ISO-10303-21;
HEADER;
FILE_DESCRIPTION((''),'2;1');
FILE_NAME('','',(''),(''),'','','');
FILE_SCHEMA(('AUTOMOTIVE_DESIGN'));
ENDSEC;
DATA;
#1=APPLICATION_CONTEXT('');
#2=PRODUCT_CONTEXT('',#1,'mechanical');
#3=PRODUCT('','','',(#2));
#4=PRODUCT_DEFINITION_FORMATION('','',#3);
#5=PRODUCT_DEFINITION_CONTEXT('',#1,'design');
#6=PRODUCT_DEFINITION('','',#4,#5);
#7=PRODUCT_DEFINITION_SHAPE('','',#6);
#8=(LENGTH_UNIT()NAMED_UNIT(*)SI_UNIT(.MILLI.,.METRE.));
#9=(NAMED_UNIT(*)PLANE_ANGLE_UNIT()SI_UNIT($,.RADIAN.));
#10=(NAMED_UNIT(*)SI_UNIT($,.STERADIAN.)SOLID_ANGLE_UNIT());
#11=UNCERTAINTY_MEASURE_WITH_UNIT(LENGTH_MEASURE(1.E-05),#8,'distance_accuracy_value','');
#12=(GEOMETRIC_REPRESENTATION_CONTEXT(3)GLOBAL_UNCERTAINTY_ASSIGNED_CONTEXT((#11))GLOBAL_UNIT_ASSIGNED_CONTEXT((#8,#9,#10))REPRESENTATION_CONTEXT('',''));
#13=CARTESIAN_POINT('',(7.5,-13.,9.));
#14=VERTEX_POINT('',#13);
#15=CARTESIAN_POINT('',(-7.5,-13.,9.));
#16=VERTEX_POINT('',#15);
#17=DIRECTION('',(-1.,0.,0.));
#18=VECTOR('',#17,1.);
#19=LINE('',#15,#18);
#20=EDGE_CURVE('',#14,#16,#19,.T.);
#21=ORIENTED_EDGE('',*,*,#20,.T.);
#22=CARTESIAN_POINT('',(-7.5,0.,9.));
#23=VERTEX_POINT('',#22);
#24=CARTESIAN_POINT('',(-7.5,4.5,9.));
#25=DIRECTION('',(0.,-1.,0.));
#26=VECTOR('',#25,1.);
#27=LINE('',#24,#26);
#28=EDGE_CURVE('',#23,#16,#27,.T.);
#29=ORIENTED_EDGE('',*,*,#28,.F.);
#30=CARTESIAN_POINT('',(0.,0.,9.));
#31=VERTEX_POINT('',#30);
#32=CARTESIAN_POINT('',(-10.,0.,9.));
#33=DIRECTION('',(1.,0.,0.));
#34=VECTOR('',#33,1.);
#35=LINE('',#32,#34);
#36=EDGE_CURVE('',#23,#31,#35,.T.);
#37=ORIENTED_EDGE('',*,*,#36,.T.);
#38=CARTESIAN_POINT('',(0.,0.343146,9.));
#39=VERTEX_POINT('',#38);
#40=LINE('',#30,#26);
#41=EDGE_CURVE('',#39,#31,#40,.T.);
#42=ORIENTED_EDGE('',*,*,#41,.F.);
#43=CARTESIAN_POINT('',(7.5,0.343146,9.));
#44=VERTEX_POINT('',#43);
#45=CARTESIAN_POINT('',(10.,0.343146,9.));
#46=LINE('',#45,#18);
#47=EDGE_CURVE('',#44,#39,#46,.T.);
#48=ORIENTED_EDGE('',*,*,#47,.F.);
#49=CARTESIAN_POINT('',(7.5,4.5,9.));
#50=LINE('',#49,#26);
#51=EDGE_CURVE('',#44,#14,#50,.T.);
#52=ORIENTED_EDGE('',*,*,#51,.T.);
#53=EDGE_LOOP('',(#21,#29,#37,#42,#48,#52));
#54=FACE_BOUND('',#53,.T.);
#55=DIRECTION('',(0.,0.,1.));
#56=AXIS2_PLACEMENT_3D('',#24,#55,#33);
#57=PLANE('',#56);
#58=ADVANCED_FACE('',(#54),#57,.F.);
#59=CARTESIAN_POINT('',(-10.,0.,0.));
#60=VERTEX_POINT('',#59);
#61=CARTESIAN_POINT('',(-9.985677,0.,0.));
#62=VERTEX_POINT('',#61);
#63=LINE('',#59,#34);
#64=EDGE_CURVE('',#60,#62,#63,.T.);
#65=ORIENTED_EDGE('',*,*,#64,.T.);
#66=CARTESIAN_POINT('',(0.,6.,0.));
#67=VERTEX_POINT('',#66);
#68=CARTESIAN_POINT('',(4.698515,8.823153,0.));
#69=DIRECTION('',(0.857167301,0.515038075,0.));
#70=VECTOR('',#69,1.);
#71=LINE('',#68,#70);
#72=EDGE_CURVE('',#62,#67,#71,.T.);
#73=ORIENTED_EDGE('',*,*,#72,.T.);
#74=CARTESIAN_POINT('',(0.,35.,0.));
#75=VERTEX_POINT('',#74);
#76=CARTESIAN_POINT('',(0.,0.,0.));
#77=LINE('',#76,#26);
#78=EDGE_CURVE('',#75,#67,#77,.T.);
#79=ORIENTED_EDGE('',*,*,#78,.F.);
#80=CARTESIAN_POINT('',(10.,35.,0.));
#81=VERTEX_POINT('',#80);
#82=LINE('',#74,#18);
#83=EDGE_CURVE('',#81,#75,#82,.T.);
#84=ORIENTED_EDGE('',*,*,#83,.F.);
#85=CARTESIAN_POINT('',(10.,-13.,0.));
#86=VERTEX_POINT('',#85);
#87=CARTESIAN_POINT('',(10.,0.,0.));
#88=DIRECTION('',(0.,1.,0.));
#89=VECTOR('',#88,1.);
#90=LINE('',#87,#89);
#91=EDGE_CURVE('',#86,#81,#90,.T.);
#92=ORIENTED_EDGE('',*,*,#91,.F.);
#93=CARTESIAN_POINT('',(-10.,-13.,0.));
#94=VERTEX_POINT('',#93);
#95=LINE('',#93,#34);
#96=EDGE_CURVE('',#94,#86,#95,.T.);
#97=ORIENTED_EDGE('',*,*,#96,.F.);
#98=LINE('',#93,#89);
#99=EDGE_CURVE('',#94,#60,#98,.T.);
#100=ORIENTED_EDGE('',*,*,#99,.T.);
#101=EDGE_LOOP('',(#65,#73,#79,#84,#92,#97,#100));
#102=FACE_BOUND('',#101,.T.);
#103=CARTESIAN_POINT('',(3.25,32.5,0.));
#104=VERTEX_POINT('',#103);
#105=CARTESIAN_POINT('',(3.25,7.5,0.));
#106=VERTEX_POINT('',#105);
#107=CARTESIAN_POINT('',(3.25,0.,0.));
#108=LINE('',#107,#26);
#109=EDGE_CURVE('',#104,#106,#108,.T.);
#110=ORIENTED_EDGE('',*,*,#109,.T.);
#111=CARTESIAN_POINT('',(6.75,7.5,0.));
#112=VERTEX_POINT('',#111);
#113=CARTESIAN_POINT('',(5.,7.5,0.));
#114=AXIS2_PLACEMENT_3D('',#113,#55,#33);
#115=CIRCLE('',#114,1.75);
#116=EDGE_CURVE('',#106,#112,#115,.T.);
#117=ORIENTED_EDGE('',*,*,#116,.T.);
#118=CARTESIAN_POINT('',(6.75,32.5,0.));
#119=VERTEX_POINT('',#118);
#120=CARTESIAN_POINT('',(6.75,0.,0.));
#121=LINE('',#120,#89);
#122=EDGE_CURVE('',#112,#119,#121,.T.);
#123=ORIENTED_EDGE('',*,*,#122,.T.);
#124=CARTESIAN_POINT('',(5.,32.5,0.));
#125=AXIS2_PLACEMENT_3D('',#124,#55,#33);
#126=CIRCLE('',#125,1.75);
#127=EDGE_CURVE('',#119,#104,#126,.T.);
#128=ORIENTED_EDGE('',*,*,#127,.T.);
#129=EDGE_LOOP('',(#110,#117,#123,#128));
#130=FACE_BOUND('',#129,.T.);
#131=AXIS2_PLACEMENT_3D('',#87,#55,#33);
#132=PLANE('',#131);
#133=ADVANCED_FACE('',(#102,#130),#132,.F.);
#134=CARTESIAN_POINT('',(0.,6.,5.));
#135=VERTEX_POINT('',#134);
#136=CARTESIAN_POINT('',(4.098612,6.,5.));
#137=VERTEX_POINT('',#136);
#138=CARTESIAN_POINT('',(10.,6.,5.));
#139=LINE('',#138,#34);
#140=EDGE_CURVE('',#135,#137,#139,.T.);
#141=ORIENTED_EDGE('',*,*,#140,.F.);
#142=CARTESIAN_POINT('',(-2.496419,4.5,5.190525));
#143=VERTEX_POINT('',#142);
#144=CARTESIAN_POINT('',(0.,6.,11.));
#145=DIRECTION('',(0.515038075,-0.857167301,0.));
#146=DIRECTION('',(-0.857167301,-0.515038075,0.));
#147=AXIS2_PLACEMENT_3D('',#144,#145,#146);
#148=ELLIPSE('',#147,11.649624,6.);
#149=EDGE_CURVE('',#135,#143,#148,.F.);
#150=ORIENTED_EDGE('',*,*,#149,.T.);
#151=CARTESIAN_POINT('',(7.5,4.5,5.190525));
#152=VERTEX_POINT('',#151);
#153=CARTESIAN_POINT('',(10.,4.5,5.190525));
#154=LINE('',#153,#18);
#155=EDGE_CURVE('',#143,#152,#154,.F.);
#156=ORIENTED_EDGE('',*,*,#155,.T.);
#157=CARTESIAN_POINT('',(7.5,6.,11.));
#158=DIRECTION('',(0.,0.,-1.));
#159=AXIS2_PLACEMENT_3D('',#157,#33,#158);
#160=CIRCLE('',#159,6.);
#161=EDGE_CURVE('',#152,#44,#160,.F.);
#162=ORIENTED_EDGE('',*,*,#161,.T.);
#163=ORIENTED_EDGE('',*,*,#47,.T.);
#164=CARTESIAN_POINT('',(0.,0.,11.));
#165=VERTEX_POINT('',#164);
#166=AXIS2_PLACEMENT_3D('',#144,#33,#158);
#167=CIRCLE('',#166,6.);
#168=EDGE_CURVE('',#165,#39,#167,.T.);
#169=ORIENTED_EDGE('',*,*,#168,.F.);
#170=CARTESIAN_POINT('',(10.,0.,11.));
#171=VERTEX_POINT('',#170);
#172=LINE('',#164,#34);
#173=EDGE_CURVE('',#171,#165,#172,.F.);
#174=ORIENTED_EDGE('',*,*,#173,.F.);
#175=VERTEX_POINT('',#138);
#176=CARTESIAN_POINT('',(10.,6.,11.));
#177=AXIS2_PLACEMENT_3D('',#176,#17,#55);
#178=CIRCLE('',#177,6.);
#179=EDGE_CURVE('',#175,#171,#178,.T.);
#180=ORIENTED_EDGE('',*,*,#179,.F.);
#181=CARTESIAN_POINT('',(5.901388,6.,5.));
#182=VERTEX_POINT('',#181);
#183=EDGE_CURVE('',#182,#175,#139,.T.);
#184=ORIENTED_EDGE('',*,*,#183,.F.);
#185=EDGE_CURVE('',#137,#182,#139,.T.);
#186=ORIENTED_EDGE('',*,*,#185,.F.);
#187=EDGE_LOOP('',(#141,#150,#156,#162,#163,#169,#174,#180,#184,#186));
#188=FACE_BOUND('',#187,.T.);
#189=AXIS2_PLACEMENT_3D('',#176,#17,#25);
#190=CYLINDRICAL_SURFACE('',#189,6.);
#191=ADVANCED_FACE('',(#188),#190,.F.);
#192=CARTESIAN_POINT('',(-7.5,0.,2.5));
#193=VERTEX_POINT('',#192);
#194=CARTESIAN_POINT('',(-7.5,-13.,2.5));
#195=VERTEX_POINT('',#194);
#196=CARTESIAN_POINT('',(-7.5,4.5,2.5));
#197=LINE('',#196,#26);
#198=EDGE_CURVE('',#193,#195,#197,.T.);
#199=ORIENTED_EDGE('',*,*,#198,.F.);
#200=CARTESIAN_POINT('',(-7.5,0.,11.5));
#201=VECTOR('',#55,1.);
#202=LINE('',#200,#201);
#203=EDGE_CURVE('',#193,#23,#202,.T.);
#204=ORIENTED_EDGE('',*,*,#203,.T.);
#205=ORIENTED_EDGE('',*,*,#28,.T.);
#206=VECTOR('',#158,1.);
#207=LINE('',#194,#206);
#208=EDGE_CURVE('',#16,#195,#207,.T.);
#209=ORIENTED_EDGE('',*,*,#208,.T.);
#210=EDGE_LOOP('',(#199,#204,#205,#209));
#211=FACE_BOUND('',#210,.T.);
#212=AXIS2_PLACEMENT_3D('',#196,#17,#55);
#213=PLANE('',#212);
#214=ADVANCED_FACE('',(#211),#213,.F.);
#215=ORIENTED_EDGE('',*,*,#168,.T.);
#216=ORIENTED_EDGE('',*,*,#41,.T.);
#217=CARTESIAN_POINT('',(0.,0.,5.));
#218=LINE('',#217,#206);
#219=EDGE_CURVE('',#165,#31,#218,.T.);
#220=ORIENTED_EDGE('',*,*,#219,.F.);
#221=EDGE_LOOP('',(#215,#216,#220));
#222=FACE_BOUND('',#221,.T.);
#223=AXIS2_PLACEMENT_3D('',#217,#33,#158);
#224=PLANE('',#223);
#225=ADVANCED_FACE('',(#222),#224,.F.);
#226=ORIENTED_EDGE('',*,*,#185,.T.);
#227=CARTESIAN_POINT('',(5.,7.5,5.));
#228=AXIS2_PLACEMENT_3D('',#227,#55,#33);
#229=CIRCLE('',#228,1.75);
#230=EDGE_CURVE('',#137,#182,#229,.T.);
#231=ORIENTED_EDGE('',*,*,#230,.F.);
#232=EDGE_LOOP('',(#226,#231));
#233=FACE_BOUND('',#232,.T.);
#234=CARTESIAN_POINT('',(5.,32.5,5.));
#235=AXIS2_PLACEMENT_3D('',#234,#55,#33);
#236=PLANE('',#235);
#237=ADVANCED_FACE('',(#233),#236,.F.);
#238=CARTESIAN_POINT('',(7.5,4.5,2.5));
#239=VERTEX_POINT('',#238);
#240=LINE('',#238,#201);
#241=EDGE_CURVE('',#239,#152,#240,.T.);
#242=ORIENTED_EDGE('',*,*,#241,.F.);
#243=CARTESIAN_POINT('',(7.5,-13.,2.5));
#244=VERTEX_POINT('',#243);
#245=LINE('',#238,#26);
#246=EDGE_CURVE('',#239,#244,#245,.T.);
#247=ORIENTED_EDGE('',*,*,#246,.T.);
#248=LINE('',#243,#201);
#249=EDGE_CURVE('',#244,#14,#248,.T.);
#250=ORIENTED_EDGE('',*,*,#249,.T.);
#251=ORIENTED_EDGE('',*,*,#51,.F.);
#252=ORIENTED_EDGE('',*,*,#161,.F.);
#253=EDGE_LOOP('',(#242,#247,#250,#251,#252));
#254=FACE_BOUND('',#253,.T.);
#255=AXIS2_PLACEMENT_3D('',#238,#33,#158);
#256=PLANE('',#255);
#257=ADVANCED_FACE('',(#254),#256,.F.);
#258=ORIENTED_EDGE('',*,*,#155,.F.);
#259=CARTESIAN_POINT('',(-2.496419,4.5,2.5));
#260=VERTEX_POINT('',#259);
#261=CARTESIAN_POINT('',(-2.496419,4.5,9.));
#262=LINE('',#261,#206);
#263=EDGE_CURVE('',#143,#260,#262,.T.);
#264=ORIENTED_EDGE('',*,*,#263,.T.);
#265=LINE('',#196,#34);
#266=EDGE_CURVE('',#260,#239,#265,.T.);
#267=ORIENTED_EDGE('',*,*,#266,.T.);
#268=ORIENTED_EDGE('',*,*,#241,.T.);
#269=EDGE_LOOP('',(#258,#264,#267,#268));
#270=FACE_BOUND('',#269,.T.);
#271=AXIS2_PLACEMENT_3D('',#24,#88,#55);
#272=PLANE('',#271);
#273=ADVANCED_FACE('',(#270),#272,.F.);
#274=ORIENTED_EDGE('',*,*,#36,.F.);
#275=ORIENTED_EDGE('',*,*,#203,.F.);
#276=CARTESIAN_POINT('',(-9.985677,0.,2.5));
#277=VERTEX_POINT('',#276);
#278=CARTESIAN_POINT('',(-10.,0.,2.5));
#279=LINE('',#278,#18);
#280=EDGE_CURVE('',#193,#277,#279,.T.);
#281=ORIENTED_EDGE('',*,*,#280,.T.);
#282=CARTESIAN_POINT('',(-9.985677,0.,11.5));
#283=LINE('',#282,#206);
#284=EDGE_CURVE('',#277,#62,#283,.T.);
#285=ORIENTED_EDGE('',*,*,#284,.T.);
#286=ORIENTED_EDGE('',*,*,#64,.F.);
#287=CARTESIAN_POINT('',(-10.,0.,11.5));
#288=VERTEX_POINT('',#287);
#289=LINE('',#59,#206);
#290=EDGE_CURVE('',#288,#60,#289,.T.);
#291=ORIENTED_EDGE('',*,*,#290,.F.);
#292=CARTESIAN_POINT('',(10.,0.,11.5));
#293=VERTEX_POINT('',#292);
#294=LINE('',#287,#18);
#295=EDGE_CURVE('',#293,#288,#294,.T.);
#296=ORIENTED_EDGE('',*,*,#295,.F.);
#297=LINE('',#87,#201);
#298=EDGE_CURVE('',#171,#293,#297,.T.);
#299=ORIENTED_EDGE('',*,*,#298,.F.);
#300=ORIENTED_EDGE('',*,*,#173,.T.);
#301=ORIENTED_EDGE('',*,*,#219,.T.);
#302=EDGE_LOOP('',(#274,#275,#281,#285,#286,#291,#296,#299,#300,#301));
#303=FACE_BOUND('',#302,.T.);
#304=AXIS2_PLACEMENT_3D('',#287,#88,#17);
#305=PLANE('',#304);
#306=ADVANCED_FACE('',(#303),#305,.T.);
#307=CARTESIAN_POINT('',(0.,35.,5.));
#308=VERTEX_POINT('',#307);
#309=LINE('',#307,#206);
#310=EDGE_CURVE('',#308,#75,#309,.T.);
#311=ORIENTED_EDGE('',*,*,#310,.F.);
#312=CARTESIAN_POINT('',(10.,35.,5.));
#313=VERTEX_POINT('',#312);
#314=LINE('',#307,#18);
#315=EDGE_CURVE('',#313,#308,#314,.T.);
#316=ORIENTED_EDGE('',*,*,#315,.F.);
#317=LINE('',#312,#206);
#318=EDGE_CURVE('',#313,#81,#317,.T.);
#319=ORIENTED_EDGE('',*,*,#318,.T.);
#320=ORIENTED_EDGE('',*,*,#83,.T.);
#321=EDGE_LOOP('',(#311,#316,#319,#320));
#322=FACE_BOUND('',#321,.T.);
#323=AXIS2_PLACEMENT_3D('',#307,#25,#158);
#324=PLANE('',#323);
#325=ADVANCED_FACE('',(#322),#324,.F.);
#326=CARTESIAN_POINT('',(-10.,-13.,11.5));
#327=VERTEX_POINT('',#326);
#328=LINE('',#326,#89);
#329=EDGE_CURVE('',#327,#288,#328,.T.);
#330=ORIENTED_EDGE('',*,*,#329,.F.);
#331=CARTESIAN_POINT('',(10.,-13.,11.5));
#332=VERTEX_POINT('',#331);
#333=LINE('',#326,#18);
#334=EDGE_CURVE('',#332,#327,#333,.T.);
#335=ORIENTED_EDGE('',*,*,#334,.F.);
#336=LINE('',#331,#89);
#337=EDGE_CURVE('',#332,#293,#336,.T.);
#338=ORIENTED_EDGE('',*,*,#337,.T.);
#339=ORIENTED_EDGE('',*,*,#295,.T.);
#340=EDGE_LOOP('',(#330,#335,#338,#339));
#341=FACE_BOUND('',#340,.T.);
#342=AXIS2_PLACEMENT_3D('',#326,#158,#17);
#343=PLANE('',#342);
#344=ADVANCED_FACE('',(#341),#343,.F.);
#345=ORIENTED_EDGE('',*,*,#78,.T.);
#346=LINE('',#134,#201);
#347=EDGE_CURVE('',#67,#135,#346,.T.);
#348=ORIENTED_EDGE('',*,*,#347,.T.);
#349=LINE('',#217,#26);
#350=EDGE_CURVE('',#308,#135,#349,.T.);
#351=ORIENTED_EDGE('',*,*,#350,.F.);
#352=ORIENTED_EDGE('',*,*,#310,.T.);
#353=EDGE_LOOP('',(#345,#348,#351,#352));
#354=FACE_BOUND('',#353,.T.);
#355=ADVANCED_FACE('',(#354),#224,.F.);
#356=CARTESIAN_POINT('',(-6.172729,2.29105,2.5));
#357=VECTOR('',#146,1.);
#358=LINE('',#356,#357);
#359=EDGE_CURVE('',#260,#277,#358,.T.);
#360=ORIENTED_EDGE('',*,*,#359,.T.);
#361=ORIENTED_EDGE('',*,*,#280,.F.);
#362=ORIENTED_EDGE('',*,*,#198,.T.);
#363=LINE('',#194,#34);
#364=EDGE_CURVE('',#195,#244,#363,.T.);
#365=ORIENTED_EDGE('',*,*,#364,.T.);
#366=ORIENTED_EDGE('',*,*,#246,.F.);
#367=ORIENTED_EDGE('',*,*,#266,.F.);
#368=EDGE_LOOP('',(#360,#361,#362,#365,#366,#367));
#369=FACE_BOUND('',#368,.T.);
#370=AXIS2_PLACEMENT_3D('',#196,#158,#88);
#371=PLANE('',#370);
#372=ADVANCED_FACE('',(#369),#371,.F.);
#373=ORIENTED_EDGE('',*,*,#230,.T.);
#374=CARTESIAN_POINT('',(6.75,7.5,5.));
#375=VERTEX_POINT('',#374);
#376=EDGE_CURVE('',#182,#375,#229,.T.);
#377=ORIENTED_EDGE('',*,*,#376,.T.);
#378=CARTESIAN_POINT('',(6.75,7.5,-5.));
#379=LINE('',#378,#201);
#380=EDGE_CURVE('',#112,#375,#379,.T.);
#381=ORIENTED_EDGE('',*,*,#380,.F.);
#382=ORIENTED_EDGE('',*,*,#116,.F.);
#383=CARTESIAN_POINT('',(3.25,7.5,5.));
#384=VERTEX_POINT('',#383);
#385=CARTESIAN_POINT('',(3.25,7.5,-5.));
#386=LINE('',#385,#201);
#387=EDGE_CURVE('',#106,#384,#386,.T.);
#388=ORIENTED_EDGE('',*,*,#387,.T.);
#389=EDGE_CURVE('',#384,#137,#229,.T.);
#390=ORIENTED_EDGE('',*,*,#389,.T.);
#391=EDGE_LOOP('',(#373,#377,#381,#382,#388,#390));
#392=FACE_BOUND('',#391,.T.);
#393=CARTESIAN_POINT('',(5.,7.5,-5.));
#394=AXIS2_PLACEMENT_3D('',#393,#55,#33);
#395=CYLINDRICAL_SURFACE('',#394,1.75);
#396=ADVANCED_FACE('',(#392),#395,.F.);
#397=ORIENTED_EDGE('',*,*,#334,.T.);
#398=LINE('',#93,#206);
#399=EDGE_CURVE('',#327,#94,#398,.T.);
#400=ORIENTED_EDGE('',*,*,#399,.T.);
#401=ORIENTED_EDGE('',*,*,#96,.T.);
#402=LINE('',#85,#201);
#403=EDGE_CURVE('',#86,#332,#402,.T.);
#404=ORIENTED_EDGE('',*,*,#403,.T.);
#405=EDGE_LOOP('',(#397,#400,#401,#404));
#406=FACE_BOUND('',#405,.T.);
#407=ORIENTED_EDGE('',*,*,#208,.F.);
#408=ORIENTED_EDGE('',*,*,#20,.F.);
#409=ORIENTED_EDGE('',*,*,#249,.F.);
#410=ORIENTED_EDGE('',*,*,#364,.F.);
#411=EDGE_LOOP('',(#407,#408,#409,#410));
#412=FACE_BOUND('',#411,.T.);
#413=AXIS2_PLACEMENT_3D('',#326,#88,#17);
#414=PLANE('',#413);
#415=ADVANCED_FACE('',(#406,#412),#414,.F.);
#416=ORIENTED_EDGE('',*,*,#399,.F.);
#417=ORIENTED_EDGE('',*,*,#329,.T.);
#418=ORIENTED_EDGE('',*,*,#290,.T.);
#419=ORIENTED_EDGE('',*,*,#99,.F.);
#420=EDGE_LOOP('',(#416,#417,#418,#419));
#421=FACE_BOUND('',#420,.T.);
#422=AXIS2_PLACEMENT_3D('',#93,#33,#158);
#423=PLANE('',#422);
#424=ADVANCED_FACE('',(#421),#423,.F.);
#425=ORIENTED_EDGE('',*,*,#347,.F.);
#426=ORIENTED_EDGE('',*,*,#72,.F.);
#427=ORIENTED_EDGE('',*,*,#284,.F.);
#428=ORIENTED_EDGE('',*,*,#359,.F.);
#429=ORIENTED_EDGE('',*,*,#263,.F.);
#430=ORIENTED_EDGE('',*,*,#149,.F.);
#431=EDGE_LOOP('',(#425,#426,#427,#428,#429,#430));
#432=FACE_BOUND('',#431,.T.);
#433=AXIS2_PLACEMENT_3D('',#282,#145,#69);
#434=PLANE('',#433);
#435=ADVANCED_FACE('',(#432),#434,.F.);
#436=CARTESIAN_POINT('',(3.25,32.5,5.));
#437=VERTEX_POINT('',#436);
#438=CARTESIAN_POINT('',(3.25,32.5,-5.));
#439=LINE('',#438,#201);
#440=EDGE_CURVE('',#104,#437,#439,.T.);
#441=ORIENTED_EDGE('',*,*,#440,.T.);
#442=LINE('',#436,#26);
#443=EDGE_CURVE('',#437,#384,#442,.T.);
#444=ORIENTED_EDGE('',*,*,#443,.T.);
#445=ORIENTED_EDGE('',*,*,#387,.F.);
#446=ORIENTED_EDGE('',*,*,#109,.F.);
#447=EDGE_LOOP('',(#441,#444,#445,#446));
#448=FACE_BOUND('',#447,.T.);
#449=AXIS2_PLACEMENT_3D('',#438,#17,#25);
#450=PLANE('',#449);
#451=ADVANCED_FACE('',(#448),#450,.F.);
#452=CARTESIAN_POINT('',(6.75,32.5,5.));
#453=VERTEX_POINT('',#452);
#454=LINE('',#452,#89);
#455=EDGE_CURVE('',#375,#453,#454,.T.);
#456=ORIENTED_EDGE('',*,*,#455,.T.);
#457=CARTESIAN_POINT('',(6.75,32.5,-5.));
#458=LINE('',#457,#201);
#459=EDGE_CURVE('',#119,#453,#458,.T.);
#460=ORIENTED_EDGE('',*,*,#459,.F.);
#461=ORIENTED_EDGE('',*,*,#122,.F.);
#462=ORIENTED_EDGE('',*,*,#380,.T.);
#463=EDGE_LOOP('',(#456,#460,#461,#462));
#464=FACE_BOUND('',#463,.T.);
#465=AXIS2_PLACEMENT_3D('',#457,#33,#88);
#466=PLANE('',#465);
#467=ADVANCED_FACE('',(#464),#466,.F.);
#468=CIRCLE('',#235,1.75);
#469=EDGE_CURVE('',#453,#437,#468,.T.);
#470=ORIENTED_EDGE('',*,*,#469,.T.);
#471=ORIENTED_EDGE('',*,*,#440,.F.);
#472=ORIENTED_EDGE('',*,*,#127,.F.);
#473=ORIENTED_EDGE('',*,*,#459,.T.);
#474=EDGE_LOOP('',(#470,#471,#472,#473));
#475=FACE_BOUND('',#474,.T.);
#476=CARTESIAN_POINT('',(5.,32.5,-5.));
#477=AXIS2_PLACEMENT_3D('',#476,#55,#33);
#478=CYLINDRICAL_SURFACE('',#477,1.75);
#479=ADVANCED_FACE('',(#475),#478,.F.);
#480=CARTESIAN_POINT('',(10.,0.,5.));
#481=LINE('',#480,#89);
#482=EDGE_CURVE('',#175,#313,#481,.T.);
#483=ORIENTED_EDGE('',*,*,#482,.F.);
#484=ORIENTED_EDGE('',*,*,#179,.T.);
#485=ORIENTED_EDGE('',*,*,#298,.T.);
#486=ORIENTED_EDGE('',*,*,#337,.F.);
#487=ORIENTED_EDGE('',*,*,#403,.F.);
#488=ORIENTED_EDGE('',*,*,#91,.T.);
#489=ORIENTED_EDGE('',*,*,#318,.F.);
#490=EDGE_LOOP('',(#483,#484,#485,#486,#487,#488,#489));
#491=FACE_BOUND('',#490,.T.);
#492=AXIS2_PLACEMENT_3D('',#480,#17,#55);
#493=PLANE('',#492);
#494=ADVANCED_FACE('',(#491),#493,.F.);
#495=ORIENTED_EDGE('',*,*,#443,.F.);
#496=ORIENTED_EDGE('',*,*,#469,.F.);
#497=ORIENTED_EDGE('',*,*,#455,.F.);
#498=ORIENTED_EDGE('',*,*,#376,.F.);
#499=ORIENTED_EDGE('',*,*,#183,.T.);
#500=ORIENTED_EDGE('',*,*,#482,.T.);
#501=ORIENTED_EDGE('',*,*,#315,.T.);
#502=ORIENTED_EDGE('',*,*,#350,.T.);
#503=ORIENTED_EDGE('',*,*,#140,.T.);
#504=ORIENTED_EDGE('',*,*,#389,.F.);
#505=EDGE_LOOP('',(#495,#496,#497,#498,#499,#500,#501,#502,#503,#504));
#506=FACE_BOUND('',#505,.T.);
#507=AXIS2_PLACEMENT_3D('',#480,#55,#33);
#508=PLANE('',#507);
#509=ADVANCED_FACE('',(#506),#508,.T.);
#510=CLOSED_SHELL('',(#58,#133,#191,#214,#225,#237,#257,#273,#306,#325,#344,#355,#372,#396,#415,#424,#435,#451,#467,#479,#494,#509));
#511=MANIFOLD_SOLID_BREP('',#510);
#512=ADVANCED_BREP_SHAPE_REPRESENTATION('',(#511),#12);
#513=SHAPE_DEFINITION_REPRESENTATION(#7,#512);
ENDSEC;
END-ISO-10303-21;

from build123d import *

# Parameters (mm, degrees)
SKETCH1_W           = 10
SKETCH1_H           = 35
BOSS_EXTRUDE1_DEPTH = 5
SKETCH9_W           = 20
SKETCH9_H           = 11.5
BOSS_EXTRUDE3_DEPTH = 13
FILLET1_R           = 6
SKETCH10_W          = 15
SKETCH10_H          = 6.5
CUT_EXTRUDE4_DEPTH  = 17.5
CUT_EXTRUDE2_DEPTH  = 10
CHAMFER2_SIZE       = 6
CHAMFER2_SIZE_2     = 9.985676894


with BuildPart() as part:
    # Sketch1 → Boss-Extrude1 (new body)
    with BuildSketch(Plane.XY):
        with Locations((5, 17.5)):
            Rectangle(SKETCH1_W, SKETCH1_H)
    extrude(amount=BOSS_EXTRUDE1_DEPTH)

    # Sketch9 → Boss-Extrude3 (add)
    with BuildSketch(Plane.XZ):
        with Locations((0, 5.75)):
            Rectangle(SKETCH9_W, SKETCH9_H)
    extrude(amount=BOSS_EXTRUDE3_DEPTH)

    # Fillet1
    fillet1_edges = [part.edges().sort_by_distance(p)[0] for p in [
        (5, 0, 5),
    ]]
    fillet(fillet1_edges, radius=FILLET1_R)

    # Sketch10 → Cut-Extrude4 (cut)
    with BuildSketch(Plane.XZ.offset(13)):
        with Locations((0, 5.75)):
            Rectangle(SKETCH10_W, SKETCH10_H)
    extrude(amount=-CUT_EXTRUDE4_DEPTH, mode=Mode.SUBTRACT)

    # Sketch4 → Cut-Extrude2 (cut)
    with BuildSketch(Plane.XY.offset(5)):
        with BuildLine():
            Line((6.75, 32.5), (6.75, 7.5))
            ThreePointArc((6.75, 7.5), (5, 5.75), (3.25, 7.5))
            Line((3.25, 7.5), (3.25, 32.5))
            ThreePointArc((3.25, 32.5), (5, 34.25), (6.75, 32.5))
        make_face()
    extrude(amount=-CUT_EXTRUDE2_DEPTH, mode=Mode.SUBTRACT)

    # Chamfer2
    # the kernel refuses this chamfer: 9.985676894, 6 mm, written as the material it adds along each edge
    with BuildSketch(Plane(origin=(0, 0, 0), x_dir=(0.055087232083824676, 0.9984815455787568, 0), z_dir=(0, 0, 1))) as chamfer2_piece_1:
        Polygon((CHAMFER2_SIZE * 0.998481545579, CHAMFER2_SIZE * 0.0550872320838), (-CHAMFER2_SIZE_2 * 0.0550872320844, CHAMFER2_SIZE_2 * 0.998481545589), (0, 0), align=None)
    extrude(amount=2.5)
    with BuildSketch(Plane(origin=(0, 0, 0), x_dir=(0.055087232083824676, 0.9984815455787568, 0), z_dir=(0, 0, 1))) as chamfer2_piece_2_section:
        Polygon((CHAMFER2_SIZE * 0.998481545579, CHAMFER2_SIZE * 0.0550872320838), (-CHAMFER2_SIZE_2 * 0.0550872320844, CHAMFER2_SIZE_2 * 0.998481545589), (0, 0), align=None)
    chamfer2_piece_2 = extrude(amount=28.325253365, mode=Mode.PRIVATE)
    chamfer2_piece_2 = chamfer2_piece_2 - Plane(origin=(-0.832139741, 6, 11), x_dir=(0, 0, -1), z_dir=(-1, 0, 0)) * Cylinder(6, 97, mode=Mode.PRIVATE)
    chamfer2_piece_2 = split(chamfer2_piece_2, bisect_by=Plane(origin=(-0.832139741, 4.5, 3.75), z_dir=(0, 1, 0)), keep=Keep.TOP, mode=Mode.PRIVATE)
    chamfer2_piece_2 = split(chamfer2_piece_2, bisect_by=Plane(origin=(-0.832139741, 5, 11.5), z_dir=(0, 0, -1)), keep=Keep.TOP, mode=Mode.PRIVATE)
    add(chamfer2_piece_2)


solid = part.part
